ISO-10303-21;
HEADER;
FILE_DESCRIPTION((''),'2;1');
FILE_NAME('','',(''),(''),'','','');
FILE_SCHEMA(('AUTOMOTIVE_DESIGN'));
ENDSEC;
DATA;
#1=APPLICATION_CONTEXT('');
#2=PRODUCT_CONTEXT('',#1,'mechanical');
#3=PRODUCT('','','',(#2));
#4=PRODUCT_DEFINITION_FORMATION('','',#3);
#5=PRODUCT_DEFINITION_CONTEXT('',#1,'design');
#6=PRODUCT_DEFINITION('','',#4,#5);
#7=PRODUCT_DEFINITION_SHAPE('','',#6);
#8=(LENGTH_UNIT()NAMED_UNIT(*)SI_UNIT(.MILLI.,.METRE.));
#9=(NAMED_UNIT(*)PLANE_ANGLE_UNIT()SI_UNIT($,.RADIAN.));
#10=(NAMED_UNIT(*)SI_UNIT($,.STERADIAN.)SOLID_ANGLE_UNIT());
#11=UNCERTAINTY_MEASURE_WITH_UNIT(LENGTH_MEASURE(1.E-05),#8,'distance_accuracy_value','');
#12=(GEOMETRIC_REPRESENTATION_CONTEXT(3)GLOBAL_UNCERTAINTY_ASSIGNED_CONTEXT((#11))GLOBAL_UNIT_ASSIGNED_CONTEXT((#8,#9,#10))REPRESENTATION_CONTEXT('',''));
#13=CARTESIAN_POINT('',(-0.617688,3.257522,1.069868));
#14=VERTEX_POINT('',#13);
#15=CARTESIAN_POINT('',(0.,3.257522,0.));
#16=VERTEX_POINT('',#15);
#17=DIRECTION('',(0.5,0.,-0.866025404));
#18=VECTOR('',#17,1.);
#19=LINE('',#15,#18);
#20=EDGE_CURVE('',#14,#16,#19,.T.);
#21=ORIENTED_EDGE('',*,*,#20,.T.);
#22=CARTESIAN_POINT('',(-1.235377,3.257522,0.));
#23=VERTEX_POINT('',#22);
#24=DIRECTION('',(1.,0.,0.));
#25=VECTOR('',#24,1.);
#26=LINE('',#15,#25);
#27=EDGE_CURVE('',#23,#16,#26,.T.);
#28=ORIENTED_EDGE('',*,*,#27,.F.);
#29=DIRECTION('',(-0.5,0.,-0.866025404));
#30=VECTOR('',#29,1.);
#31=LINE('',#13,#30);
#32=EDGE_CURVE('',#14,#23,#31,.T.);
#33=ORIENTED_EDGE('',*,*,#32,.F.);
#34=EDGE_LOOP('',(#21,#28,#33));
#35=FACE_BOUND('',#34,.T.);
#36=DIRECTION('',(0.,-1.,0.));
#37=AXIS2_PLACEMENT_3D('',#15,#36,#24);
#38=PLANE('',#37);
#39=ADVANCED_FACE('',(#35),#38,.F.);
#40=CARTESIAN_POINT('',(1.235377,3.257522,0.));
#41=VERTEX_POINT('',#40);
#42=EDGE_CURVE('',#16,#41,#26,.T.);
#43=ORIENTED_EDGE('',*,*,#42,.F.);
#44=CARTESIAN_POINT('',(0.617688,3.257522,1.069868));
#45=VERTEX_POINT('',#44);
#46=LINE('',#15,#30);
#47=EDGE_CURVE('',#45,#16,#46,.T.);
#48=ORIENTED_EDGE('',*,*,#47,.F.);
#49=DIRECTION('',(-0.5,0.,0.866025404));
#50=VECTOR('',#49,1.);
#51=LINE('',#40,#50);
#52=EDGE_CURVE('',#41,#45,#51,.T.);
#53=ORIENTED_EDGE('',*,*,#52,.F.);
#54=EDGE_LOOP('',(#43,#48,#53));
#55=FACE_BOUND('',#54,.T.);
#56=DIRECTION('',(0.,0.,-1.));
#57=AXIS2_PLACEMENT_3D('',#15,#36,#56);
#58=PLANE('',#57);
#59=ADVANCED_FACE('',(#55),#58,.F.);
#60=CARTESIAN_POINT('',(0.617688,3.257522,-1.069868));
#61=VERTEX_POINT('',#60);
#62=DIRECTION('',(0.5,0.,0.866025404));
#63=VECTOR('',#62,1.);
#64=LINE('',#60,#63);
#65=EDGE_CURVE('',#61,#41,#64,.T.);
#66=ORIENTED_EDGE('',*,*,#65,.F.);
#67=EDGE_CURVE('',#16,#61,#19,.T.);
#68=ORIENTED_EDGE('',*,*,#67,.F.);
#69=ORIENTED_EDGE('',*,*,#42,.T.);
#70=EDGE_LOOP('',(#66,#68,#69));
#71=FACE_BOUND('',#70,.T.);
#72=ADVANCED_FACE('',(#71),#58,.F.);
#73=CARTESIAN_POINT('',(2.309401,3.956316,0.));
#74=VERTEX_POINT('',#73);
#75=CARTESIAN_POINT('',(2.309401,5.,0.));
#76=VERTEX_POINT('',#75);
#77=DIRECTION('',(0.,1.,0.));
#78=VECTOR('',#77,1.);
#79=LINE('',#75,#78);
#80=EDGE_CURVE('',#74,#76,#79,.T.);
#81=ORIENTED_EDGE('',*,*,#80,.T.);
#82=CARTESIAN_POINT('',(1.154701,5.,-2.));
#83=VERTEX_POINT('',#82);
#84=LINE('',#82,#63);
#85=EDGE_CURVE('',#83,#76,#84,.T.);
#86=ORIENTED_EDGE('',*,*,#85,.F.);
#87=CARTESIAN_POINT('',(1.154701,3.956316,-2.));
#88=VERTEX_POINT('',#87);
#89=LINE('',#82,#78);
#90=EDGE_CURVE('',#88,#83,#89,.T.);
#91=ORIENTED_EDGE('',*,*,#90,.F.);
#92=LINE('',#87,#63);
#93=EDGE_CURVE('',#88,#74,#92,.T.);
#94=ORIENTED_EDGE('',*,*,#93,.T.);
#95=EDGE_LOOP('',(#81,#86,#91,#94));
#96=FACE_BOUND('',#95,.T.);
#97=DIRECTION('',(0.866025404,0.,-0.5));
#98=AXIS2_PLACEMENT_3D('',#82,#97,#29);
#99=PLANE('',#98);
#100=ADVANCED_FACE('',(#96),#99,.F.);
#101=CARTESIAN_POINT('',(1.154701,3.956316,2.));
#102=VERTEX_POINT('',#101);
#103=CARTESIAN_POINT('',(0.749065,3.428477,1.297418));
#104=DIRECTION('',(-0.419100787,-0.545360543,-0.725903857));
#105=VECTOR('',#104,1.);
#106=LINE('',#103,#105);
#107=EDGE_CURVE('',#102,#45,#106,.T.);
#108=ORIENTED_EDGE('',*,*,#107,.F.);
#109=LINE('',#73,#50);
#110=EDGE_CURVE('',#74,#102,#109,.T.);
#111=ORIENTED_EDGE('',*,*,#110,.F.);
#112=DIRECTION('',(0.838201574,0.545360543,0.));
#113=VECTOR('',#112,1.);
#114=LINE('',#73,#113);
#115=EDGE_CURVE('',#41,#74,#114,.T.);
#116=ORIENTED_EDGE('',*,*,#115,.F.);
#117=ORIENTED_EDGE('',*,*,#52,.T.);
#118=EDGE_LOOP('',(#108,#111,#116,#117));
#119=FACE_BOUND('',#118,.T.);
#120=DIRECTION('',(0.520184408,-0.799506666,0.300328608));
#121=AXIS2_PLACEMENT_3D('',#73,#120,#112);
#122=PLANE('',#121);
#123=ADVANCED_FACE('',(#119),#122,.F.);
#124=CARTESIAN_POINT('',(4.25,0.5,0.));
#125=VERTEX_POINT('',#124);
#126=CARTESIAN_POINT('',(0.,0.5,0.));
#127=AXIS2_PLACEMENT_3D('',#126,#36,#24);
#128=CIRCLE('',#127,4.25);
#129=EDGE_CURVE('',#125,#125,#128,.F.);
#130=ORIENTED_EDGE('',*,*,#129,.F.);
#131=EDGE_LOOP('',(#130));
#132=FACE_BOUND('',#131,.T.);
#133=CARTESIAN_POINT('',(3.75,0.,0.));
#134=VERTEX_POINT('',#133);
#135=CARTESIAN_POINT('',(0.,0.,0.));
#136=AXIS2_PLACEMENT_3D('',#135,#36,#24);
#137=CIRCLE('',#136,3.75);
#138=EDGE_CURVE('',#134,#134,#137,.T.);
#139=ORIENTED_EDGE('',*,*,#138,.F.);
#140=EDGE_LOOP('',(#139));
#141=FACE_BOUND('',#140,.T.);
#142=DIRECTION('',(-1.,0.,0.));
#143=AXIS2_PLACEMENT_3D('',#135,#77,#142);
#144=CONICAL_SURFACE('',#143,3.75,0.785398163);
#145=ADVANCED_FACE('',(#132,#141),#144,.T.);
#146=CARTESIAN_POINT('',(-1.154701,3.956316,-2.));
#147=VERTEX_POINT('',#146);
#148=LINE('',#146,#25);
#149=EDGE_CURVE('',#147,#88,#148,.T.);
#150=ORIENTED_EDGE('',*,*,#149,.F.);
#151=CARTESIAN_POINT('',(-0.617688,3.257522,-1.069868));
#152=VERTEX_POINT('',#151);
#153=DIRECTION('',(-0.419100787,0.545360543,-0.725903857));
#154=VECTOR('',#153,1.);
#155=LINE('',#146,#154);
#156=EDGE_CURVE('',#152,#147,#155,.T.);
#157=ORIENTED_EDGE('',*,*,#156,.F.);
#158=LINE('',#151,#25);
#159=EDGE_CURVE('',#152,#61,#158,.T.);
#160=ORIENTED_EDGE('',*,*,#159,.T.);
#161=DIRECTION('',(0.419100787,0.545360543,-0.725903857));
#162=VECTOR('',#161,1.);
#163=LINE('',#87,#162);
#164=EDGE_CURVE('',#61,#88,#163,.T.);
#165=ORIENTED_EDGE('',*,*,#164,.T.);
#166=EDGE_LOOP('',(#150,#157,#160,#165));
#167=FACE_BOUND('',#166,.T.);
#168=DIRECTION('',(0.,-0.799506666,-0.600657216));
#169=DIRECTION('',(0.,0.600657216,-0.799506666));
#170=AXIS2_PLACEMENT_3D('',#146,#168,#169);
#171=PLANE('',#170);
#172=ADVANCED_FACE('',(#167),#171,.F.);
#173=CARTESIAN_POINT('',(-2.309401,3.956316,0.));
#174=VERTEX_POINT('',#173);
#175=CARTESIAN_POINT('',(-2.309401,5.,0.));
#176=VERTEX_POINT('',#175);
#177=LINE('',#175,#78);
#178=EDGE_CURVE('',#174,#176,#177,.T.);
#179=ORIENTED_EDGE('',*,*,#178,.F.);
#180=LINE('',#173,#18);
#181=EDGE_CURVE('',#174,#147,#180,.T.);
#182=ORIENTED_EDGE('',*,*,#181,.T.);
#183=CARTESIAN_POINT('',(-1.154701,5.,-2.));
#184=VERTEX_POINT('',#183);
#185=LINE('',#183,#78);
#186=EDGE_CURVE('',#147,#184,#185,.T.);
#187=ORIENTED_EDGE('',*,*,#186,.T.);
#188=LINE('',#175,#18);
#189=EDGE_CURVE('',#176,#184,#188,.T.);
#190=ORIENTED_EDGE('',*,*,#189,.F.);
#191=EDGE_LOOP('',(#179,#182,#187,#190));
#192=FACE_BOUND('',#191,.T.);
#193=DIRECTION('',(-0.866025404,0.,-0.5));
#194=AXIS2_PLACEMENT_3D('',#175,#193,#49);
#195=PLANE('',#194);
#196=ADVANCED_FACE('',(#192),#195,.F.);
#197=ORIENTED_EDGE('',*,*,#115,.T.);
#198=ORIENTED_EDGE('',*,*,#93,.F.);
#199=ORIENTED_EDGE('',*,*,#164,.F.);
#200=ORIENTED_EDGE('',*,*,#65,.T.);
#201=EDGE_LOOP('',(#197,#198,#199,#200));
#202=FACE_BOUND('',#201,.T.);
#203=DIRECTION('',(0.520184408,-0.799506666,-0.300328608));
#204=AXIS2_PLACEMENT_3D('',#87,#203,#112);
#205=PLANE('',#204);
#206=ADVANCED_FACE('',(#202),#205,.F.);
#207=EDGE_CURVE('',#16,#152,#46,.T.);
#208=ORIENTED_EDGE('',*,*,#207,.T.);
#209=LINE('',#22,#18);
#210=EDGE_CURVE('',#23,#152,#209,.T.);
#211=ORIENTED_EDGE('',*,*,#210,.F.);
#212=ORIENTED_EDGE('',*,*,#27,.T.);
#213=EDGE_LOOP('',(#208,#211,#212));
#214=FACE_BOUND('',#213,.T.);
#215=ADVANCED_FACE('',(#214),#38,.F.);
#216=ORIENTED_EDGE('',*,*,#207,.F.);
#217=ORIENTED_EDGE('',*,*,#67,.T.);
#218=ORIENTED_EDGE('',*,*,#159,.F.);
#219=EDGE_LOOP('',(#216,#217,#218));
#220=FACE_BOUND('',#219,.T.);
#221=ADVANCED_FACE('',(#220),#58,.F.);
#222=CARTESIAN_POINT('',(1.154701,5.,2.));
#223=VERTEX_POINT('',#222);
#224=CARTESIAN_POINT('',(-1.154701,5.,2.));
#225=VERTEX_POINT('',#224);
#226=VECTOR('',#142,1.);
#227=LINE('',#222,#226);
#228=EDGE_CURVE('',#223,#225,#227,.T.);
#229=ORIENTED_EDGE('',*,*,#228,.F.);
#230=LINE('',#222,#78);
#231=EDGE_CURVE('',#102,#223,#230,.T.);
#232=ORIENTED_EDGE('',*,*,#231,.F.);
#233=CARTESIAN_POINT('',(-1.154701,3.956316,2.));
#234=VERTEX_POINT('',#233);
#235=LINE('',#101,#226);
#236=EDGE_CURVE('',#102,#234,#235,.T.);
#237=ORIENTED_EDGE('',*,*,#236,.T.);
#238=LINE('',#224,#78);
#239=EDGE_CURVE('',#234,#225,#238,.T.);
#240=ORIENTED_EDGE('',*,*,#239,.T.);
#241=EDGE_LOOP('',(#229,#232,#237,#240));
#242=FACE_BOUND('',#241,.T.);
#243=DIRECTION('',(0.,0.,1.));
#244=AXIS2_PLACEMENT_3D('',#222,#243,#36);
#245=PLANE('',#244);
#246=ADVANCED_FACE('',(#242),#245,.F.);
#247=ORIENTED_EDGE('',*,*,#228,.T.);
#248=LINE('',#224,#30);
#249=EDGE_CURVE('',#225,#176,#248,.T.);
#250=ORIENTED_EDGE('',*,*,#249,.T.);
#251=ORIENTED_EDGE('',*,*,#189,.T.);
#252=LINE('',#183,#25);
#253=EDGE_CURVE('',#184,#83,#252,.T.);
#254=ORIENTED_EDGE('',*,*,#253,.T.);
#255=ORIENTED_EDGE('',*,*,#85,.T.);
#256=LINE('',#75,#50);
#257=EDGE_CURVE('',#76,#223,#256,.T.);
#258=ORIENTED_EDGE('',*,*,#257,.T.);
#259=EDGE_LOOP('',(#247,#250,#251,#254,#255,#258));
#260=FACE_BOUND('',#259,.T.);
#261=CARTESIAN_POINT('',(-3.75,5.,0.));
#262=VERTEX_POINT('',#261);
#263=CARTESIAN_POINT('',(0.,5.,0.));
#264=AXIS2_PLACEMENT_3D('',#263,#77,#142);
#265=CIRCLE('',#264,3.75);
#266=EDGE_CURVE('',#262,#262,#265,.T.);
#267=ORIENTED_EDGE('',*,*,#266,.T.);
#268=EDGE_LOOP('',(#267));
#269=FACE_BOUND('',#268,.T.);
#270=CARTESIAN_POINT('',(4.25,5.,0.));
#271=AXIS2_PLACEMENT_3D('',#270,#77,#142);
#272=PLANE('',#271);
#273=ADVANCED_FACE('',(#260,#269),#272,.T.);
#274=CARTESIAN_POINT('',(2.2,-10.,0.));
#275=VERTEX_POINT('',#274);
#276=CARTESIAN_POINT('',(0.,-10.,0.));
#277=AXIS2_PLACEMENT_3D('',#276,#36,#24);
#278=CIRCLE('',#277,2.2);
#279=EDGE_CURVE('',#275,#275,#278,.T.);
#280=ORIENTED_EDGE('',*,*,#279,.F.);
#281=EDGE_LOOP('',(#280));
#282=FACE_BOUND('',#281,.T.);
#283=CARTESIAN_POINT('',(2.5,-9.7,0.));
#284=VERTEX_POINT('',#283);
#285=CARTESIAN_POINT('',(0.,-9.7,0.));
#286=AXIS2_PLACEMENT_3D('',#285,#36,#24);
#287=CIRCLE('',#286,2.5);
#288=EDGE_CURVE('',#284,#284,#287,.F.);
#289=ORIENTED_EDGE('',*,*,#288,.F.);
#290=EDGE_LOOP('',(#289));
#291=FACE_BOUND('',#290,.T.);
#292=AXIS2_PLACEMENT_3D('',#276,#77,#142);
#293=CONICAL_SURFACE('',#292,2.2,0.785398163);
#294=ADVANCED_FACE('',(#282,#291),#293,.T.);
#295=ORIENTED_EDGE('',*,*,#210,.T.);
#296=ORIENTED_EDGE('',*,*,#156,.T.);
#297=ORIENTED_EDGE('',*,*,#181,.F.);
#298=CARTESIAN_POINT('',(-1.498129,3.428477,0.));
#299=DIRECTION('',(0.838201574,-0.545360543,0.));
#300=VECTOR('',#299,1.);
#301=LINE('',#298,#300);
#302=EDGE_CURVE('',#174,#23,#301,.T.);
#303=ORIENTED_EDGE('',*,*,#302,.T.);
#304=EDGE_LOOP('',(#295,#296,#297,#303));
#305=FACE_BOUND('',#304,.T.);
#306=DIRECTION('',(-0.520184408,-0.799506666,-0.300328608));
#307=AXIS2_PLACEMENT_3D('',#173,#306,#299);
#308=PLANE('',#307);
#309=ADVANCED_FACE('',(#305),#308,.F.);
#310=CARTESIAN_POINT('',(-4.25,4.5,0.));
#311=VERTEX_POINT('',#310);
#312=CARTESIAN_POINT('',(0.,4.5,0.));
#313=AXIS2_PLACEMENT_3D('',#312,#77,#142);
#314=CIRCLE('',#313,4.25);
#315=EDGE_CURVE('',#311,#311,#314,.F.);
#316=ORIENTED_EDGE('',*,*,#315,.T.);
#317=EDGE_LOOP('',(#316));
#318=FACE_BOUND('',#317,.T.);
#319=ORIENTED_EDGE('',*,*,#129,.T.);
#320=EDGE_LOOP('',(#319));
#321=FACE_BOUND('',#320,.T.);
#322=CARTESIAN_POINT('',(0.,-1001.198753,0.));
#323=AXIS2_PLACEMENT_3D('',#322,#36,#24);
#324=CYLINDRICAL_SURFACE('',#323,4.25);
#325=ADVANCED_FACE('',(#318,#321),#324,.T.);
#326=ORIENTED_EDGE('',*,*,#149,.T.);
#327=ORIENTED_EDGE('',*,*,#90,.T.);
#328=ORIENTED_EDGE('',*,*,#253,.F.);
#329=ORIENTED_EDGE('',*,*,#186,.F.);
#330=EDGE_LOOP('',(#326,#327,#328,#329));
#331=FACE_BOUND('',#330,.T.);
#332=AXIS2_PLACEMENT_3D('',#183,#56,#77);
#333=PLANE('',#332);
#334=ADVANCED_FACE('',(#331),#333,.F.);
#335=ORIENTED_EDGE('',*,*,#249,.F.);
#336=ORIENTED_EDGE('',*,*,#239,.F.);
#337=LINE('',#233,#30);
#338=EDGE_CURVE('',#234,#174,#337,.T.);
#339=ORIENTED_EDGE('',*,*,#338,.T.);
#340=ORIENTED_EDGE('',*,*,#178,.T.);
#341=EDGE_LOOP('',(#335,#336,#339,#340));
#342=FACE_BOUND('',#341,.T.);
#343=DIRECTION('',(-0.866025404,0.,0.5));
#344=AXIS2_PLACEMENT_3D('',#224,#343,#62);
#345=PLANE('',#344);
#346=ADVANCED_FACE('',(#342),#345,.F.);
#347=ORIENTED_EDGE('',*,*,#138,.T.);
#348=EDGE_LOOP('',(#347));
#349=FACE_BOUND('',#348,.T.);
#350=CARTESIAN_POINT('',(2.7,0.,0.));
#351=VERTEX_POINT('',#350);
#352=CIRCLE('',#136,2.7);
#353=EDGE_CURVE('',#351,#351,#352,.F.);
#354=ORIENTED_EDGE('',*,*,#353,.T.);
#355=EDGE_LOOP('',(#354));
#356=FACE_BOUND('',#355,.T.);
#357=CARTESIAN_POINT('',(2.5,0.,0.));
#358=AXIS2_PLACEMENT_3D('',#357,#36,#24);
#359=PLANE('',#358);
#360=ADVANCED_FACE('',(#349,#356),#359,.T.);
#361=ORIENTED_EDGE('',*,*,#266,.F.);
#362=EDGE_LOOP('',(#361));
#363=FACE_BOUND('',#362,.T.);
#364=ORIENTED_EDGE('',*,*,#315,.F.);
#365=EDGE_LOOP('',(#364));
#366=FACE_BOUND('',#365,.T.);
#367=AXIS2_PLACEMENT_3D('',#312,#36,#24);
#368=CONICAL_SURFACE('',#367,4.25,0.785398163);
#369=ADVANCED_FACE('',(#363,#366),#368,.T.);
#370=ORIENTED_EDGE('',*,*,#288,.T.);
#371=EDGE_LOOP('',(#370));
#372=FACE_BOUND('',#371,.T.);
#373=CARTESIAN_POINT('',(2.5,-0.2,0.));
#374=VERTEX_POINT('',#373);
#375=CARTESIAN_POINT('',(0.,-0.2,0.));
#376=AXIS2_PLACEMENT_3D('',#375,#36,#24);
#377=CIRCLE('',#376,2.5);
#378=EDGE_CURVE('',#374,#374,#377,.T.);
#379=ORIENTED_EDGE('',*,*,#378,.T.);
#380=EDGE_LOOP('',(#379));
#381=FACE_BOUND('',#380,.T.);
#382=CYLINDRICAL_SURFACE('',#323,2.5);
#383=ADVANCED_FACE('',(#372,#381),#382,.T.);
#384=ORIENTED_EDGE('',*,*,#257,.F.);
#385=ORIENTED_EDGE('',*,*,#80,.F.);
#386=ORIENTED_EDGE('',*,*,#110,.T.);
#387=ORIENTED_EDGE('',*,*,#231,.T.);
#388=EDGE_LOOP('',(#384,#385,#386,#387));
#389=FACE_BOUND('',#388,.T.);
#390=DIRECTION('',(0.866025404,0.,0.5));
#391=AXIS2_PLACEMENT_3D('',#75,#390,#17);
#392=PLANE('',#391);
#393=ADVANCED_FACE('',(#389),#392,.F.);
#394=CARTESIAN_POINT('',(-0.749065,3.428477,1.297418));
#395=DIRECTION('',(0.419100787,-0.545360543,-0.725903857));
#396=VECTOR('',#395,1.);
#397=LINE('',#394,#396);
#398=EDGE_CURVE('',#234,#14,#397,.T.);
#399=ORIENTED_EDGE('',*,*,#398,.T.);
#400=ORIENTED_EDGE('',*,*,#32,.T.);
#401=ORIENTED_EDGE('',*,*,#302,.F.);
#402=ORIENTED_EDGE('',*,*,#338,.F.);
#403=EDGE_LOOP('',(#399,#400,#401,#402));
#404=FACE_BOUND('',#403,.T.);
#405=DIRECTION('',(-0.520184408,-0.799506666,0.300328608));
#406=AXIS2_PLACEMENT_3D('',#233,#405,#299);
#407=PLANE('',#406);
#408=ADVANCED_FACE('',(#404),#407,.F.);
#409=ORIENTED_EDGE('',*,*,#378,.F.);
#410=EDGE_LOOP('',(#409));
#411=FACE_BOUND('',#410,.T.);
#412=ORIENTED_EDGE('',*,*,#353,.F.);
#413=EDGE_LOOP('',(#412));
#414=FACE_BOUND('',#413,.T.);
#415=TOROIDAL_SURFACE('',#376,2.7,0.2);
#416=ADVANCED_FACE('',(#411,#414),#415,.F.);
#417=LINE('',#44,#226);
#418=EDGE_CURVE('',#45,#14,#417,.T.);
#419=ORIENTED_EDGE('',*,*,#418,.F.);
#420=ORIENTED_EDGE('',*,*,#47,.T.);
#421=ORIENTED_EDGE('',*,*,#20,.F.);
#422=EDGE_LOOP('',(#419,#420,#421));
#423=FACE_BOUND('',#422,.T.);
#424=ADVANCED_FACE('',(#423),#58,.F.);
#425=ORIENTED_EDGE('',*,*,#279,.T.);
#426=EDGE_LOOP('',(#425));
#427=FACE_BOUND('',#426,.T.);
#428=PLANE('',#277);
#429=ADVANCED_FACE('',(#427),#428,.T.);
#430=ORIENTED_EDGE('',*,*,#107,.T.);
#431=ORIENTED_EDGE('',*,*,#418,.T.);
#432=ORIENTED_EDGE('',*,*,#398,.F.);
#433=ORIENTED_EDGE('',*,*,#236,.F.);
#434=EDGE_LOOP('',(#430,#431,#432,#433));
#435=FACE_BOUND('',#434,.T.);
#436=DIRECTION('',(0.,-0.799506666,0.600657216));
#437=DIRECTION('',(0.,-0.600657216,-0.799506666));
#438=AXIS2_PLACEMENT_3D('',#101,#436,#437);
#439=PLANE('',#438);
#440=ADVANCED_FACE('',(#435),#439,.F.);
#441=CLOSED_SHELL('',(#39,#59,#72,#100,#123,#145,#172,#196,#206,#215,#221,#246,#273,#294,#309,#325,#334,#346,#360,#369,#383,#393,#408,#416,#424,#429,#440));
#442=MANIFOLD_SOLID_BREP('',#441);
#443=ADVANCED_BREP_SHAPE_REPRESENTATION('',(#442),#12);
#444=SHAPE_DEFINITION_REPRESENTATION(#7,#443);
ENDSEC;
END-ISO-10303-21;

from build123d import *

# Parameters (mm, degrees)
REDONDEO1_R          = 0.2
CHAFL_N1_SIZE        = 0.3
CHAFL_N2_SIZE        = 0.5
CORTAR_BARRER1_START = 3.956316317
CORTAR_BARRER1_DEPTH = 1.043683683


with BuildPart() as part:
    # Croquis1 → Revolución1 (revolve)
    with BuildSketch(Plane.XY):
        Polygon((0, 0), (0, -10), (2.5, -10), (2.5, 0), (4.25, 0), (4.25, 5), (0, 5), align=None)
    revolve(axis=Axis((0, -1001.198752701, 0), (0, 1, 0)))

    # Redondeo1
    redondeo1_edges = [part.edges().sort_by_distance(p)[0] for p in [
        (-2.5, 0, 0),
    ]]
    fillet(redondeo1_edges, radius=REDONDEO1_R)

    # Chaflán1
    chafl_n1_edges = [part.edges().sort_by_distance(p)[0] for p in [
        (-2.5, -10, 0),
    ]]
    chamfer(chafl_n1_edges, length=CHAFL_N1_SIZE)

    # Chaflán2
    chafl_n2_edges = [part.edges().sort_by_distance(p)[0] for p in [
        (-4.25, 5, 0),
        (-4.25, 0, 0),
    ]]
    chamfer(chafl_n2_edges, length=CHAFL_N2_SIZE)

    # Cortar-Barrer1: read off the stored shape, not the designer's step
    # Cortar-Barrer1 outline → Cortar-Barrer1 (cut)
    with BuildSketch(Plane(origin=(0, 0, 0), x_dir=(1, 0, 0), z_dir=(0, 1, 0)).offset(CORTAR_BARRER1_START)):
        Polygon((1.154700538, 2), (-1.154700538, 2), (-2.309401077, 0), (-1.154700538, -2), (1.154700538, -2), (2.309401077, 0), align=None)
    extrude(amount=CORTAR_BARRER1_DEPTH, mode=Mode.SUBTRACT)

    # Cortar-Barrer1 2: loft between two sections, ruled curve by curve
    cortar_barrer1_2_from = [
        Edge.make_line((-2.309401077, 3.956316317, 0), (-1.154700538, 3.956316317, -2)),
        Edge.make_line((-1.154700538, 3.956316317, 2), (-2.309401077, 3.956316317, 0)),
        Edge.make_line((-1.154700538, 3.956316317, -2), (1.154700538, 3.956316317, -2)),
        Edge.make_line((1.154700538, 3.956316317, 2), (-1.154700538, 3.956316317, 2)),
        Edge.make_line((1.154700538, 3.956316317, -2), (2.309401077, 3.956316317, 0)),
        Edge.make_line((2.309401077, 3.956316317, 0), (1.154700538, 3.956316317, 2)),
    ]
    cortar_barrer1_2_to = [
        Edge.make_line((-1.235376897, 3.257522104, 0), (-0.617688448, 3.257522104, -1.069867776)),
        Edge.make_line((-0.617688448, 3.257522104, 1.069867776), (-1.235376897, 3.257522104, 0)),
        Edge.make_line((-0.617688448, 3.257522104, -1.069867776), (0.617688448, 3.257522104, -1.069867776)),
        Edge.make_line((0.617688448, 3.257522104, 1.069867776), (-0.617688448, 3.257522104, 1.069867776)),
        Edge.make_line((0.617688448, 3.257522104, -1.069867776), (1.235376897, 3.257522104, 0)),
        Edge.make_line((1.235376897, 3.257522104, 0), (0.617688448, 3.257522104, 1.069867776)),
    ]
    cortar_barrer1_2 = Solid(Shell([*[Face.make_surface_from_curves(cortar_barrer1_2_from[k], cortar_barrer1_2_to[k]) for k in range(6)], Face(Wire(cortar_barrer1_2_from)), Face(Wire(cortar_barrer1_2_to))]))
    add(cortar_barrer1_2, mode=Mode.SUBTRACT)


solid = part.part
